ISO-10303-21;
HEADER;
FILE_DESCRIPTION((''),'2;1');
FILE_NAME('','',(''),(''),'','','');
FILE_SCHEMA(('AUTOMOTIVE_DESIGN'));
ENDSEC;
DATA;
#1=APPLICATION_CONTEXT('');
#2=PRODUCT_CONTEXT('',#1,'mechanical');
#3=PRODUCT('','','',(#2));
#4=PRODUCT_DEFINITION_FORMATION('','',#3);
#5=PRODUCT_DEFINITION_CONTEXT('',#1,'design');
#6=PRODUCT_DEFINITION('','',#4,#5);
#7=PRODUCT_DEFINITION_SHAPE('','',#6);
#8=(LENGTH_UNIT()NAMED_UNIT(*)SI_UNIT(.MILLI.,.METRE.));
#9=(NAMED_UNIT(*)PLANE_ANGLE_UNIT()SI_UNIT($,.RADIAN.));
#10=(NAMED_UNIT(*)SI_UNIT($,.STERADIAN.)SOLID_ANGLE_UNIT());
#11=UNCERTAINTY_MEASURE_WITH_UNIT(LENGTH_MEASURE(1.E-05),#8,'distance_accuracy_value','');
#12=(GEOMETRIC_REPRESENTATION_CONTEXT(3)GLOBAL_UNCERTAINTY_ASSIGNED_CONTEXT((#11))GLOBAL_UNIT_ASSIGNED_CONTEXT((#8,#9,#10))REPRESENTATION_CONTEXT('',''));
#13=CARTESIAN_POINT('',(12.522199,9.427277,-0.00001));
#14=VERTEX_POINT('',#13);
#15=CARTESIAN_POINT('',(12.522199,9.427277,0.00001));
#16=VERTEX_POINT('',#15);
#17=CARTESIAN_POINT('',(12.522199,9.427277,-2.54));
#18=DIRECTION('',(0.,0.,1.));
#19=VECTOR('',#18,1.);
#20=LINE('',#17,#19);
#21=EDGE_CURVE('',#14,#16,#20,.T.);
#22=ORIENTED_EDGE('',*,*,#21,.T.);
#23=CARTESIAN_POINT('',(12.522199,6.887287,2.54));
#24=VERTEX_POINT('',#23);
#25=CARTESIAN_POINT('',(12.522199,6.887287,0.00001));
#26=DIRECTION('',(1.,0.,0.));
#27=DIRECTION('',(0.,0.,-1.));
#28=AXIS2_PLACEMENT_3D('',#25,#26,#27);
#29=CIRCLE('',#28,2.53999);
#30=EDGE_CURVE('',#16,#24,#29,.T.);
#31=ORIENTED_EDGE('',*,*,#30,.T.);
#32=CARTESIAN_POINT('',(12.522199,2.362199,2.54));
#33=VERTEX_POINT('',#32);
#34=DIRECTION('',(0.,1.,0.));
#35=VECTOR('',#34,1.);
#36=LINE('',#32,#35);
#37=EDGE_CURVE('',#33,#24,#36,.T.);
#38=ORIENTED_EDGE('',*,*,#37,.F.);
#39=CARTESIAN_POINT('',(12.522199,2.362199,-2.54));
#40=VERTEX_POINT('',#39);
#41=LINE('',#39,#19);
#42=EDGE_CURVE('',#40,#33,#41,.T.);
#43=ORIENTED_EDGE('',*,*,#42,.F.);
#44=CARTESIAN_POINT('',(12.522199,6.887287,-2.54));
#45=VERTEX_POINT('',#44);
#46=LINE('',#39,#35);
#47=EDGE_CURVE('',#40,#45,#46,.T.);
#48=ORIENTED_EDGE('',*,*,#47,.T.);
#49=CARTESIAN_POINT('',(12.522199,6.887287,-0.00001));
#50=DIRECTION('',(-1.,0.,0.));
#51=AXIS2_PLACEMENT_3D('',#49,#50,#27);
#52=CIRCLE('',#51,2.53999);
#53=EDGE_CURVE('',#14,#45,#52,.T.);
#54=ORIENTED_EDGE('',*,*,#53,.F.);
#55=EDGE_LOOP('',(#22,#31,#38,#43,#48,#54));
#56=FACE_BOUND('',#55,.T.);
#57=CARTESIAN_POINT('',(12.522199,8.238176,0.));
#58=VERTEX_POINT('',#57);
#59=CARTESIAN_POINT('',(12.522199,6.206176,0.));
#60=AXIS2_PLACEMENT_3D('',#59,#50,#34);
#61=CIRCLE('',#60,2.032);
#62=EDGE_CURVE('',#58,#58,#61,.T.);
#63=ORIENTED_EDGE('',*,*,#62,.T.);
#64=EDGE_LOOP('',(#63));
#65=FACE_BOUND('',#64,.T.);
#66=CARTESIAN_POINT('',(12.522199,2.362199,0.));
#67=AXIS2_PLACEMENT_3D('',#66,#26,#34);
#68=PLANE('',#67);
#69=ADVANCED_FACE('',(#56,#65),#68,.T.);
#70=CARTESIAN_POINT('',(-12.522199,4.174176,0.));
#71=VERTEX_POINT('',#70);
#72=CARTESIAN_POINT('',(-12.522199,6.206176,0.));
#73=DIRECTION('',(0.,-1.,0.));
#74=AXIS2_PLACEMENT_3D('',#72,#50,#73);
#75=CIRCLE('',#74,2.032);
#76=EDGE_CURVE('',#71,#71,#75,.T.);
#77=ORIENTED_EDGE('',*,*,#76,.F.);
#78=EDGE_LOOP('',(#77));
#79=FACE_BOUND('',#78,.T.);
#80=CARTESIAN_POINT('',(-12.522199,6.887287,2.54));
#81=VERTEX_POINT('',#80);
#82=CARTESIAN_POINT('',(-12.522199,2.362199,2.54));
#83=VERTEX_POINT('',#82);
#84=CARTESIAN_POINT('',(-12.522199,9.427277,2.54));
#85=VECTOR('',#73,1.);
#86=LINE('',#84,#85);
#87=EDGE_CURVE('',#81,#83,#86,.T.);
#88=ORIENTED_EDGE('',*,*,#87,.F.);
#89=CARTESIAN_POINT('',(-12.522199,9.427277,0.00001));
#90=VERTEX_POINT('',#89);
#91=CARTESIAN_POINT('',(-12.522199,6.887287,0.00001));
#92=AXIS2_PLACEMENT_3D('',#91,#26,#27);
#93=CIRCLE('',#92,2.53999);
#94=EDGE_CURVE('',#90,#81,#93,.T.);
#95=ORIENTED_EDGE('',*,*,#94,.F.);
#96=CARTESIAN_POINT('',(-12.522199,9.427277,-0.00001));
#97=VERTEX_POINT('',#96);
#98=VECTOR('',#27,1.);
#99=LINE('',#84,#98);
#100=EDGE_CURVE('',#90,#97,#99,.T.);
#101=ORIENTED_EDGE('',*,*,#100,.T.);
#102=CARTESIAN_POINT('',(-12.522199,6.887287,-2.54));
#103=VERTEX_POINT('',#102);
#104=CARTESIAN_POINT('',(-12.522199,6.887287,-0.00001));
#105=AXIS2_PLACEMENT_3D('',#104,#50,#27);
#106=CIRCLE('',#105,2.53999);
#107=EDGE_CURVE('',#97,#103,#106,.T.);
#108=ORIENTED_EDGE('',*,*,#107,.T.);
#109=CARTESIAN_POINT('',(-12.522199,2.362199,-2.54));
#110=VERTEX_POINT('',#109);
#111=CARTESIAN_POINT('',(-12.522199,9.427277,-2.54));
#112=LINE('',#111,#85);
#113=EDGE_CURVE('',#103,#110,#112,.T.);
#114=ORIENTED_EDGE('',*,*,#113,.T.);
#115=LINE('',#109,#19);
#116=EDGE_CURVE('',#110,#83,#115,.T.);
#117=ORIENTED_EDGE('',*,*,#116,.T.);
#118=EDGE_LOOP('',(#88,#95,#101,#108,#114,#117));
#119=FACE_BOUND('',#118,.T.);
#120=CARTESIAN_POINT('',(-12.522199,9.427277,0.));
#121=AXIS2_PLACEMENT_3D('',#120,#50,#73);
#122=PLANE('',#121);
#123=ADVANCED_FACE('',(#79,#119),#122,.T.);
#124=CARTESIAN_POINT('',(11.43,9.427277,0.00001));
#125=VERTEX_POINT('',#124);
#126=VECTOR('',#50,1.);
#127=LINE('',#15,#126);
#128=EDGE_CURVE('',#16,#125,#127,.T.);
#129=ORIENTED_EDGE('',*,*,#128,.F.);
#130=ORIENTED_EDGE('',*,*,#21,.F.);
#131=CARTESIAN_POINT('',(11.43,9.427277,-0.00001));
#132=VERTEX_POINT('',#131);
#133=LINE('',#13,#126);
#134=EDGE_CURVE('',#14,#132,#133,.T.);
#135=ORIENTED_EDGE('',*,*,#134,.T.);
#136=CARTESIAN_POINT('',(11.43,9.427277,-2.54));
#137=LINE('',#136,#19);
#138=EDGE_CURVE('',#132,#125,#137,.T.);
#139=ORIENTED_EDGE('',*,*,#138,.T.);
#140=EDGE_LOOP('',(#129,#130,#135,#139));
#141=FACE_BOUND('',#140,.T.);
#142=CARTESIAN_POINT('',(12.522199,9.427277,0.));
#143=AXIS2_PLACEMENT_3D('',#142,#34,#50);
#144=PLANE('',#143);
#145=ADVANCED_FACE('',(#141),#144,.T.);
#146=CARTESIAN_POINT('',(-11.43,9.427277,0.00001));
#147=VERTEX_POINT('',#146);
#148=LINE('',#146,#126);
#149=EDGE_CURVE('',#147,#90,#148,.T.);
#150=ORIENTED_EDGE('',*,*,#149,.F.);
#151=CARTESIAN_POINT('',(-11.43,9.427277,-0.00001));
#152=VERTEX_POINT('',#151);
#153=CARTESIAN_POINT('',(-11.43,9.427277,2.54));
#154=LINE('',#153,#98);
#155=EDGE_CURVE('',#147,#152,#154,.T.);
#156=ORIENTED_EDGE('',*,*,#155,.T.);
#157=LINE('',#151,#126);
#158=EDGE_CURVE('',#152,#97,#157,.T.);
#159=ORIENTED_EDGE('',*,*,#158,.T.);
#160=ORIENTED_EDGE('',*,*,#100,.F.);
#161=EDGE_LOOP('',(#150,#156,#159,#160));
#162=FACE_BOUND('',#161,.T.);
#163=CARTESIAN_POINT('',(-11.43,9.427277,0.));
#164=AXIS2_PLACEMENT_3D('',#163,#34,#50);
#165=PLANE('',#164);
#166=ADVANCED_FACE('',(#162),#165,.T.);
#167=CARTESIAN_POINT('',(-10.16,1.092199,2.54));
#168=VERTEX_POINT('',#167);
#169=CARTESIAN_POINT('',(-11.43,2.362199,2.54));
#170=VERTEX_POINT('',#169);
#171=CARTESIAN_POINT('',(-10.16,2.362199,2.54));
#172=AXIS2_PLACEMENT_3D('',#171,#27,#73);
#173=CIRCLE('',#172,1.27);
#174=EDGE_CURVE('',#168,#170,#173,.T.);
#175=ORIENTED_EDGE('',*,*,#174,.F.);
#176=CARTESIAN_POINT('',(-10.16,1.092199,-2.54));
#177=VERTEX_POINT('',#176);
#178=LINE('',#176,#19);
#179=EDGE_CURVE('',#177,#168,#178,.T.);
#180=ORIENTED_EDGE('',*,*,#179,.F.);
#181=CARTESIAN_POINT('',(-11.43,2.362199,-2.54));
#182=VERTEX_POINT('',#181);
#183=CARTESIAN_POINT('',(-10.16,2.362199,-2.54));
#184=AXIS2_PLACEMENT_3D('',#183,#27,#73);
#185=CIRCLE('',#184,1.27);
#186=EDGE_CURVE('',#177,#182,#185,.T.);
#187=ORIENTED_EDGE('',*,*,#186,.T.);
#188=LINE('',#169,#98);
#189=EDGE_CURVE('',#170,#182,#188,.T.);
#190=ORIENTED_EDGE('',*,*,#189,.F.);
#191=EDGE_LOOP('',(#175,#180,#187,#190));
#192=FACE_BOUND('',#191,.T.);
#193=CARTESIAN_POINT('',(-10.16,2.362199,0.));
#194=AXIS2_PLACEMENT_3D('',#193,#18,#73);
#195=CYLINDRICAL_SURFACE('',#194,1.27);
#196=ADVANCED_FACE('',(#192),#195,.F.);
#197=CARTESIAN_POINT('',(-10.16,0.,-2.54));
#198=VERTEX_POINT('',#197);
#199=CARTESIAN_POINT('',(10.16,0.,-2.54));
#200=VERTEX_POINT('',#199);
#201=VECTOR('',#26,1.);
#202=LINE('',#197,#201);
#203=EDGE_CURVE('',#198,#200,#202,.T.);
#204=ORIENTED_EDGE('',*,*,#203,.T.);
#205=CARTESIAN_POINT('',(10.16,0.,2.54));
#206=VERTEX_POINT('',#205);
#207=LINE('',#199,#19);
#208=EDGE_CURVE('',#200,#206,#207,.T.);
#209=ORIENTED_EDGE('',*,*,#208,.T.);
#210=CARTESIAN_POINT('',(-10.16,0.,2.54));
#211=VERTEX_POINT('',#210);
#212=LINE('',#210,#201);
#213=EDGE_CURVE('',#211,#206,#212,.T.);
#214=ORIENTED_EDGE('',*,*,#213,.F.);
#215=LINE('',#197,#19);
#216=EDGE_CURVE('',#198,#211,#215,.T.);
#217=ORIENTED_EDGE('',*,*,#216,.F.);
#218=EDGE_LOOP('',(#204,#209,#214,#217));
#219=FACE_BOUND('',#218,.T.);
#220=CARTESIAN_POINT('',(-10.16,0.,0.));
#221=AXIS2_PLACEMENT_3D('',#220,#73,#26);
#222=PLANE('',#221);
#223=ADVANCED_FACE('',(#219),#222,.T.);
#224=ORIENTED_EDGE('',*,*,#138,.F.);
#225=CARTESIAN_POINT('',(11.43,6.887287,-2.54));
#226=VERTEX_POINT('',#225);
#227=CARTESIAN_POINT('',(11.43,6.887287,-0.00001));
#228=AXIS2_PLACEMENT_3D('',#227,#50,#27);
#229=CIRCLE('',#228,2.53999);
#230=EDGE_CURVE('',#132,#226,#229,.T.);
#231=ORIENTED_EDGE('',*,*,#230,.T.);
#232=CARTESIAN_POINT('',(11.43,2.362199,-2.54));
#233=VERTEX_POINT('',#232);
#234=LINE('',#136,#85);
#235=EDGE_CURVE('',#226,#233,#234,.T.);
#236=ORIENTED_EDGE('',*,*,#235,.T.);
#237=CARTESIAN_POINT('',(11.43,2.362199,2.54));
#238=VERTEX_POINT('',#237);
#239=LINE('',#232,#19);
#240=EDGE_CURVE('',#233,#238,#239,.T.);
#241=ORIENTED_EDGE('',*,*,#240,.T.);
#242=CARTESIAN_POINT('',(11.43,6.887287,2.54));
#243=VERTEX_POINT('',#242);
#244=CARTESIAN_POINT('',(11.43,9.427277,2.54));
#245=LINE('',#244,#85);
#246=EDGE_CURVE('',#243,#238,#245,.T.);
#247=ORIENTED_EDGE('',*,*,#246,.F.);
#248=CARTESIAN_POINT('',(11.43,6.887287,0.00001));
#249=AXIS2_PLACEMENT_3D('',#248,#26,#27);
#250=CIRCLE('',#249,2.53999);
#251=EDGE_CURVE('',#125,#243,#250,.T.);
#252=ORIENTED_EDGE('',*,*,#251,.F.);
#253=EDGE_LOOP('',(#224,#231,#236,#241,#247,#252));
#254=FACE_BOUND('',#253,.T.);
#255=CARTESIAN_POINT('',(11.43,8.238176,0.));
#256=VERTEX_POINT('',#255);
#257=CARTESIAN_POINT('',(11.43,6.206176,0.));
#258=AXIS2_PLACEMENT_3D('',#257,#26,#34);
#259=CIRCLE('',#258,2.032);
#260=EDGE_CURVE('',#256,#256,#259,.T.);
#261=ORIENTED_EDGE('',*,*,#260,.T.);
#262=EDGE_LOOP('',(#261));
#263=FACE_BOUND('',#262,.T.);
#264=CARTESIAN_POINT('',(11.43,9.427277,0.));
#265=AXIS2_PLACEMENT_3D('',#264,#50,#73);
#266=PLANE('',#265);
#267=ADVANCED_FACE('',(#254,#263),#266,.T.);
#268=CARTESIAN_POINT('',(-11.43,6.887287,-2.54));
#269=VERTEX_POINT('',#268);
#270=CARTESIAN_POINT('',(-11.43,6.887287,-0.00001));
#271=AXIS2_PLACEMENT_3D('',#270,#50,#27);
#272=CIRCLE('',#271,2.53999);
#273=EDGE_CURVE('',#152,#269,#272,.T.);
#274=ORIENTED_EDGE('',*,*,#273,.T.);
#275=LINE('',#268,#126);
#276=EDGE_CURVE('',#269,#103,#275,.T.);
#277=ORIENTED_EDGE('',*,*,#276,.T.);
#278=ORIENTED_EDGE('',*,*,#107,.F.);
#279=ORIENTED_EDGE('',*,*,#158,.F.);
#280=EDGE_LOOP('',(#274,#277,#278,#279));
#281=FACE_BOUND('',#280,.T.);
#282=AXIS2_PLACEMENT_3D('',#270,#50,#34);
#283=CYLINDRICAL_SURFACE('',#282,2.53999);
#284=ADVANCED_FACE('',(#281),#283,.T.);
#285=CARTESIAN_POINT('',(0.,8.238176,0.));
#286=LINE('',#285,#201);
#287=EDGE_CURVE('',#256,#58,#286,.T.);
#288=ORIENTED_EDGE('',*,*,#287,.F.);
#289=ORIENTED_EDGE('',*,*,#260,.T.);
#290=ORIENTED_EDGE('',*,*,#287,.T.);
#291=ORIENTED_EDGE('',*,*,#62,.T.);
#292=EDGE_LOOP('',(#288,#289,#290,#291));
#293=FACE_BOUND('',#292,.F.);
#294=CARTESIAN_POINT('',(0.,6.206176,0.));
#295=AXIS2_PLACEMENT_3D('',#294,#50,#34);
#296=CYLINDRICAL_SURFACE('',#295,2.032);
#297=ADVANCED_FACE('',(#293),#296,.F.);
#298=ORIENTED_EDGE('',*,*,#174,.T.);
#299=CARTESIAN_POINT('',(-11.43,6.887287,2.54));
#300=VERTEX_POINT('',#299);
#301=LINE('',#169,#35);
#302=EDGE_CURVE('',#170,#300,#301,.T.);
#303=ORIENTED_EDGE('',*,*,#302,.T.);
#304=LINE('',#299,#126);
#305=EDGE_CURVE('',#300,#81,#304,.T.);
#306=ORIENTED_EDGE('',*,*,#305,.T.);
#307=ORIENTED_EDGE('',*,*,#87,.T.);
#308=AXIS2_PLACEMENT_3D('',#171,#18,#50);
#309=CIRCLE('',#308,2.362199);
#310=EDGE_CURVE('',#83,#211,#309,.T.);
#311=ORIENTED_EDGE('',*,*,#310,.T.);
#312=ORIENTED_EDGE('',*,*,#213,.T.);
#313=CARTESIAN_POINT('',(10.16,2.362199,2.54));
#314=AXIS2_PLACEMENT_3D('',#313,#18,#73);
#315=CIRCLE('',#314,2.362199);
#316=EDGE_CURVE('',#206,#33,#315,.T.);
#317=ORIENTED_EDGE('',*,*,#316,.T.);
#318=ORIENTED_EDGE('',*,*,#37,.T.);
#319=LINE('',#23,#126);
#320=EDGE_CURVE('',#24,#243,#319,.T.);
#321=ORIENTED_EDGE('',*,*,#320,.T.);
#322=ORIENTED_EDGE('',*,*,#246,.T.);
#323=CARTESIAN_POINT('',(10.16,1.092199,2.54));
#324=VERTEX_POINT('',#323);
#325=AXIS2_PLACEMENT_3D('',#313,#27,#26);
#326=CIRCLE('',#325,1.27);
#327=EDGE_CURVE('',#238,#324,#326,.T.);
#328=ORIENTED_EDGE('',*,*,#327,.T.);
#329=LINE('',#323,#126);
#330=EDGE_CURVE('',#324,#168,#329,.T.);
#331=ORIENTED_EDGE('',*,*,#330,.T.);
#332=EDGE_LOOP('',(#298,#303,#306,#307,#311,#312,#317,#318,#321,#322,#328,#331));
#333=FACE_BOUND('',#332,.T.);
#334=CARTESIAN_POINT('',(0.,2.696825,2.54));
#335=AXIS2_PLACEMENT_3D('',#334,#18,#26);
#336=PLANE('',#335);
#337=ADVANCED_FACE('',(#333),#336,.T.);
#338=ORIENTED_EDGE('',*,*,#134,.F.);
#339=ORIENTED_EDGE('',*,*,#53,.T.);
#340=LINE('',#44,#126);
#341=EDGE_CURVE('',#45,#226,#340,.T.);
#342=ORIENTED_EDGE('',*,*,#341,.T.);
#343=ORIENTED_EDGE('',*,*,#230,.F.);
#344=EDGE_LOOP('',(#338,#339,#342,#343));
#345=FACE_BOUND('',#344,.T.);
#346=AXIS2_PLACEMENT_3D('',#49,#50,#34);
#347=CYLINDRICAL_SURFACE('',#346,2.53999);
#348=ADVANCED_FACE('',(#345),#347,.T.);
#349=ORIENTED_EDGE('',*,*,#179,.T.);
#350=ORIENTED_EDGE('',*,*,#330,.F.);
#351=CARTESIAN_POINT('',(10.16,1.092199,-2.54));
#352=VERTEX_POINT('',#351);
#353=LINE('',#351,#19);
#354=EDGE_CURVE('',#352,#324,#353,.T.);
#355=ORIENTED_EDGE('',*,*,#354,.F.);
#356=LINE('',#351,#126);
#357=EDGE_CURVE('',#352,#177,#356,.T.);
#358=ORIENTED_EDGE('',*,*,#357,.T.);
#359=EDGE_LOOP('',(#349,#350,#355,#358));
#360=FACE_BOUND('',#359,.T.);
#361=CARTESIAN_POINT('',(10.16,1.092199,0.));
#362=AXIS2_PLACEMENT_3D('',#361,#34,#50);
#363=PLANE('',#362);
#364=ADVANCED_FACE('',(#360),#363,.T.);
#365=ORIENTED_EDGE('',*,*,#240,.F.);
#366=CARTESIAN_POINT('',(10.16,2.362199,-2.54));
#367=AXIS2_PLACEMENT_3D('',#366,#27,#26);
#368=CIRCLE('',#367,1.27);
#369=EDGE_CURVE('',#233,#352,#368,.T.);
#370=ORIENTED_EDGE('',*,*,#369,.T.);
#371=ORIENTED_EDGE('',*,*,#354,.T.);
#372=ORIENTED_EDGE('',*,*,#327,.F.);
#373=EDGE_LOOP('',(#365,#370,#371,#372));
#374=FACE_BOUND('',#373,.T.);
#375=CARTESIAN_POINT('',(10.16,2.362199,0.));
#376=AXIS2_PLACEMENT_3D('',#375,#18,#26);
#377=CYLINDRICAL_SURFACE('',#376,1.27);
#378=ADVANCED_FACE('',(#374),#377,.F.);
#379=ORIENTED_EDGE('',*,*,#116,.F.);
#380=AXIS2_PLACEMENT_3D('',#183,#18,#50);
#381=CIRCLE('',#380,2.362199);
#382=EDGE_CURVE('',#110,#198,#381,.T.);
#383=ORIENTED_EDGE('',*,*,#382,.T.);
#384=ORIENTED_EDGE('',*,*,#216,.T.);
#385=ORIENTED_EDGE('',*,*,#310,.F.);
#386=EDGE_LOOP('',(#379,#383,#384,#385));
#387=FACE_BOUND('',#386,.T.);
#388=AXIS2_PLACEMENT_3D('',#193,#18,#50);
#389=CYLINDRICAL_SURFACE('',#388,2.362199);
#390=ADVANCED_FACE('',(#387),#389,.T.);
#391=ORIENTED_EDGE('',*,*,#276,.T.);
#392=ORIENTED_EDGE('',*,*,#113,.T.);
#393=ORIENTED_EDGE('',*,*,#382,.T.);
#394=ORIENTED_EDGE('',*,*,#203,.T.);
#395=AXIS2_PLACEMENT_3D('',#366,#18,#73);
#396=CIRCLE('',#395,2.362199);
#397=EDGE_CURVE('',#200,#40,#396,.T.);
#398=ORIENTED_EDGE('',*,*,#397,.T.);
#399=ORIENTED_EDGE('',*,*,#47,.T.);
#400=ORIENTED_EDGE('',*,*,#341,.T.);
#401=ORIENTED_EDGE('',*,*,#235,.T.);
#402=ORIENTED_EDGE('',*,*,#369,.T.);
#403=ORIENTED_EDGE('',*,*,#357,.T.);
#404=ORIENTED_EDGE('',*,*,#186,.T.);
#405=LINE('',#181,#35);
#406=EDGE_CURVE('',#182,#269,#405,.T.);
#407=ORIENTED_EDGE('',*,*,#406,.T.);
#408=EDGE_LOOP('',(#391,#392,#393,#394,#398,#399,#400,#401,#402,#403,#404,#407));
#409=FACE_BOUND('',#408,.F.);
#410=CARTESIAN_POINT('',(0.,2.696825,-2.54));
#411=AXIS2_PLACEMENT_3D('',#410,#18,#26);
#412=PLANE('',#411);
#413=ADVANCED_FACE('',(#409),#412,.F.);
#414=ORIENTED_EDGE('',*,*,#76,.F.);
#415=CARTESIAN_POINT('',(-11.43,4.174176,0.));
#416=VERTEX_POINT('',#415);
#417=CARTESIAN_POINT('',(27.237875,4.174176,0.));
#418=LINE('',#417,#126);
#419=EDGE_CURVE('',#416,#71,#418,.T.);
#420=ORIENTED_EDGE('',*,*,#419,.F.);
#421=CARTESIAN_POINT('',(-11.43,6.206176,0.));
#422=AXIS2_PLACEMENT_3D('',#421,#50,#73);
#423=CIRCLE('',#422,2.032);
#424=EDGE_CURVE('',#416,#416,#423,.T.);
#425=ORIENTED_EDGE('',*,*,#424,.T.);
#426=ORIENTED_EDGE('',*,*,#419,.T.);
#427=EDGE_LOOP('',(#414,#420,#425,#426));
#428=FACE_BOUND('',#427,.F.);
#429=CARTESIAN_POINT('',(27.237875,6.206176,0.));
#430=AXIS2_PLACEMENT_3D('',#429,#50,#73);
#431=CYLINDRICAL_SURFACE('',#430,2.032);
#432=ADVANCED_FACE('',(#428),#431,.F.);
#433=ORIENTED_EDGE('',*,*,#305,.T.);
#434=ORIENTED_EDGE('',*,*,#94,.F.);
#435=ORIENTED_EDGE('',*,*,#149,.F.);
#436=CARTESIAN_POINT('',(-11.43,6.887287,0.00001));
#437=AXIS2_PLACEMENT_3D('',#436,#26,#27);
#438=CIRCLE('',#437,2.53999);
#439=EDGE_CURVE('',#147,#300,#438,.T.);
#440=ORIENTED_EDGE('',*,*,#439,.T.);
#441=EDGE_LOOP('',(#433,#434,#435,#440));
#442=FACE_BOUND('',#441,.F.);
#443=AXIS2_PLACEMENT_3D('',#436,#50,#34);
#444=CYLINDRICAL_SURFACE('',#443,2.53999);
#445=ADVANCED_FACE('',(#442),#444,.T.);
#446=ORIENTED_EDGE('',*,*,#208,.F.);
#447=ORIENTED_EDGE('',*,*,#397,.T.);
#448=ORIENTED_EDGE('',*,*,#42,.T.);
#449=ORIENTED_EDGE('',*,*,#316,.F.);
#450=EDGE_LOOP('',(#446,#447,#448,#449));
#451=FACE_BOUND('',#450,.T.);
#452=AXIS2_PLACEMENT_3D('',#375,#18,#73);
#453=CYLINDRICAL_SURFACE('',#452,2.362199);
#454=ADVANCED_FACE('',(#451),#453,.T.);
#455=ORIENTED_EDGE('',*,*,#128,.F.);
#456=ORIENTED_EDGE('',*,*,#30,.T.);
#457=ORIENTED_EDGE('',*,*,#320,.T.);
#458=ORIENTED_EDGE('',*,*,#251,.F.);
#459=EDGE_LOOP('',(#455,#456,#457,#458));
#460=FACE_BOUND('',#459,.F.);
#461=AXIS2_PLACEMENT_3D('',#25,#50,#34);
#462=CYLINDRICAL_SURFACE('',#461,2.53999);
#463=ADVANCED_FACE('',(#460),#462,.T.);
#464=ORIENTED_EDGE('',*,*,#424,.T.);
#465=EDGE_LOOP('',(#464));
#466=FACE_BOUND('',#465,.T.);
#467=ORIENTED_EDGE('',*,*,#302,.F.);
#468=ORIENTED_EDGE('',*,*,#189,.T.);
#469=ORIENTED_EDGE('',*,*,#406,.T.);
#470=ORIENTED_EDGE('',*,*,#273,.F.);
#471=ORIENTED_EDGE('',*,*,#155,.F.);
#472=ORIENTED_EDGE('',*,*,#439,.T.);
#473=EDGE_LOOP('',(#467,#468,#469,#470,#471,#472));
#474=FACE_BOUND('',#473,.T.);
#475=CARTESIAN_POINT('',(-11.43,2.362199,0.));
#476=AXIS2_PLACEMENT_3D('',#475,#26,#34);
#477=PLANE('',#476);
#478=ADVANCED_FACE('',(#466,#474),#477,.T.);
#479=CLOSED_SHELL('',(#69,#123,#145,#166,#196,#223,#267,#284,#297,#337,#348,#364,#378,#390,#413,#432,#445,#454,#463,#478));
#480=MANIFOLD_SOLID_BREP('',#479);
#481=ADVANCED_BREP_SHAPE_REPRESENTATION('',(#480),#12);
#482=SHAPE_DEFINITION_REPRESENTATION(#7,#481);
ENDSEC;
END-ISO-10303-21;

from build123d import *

# Parameters (mm, degrees)
F1_DEPTH = 2.54
F2_R     = 2.53999
F4_D     = 4.064
F4_DEPTH = 12.5231992362
F5_D     = 4.064


# Not quite as in the source:
# - a fillet or chamfer is up to 0.001 mm smaller than in the source, because OpenCascade refuses the exact size


with BuildPart() as f1:
    # F0 (on Top) → F1 (new body, symmetric)
    with BuildSketch(Plane.XY):
        with BuildLine():
            Line((-12.5221992362, 9.4272772469), (-12.5221992362, 8.3157558613))
            Line((-12.5221992362, 8.3157558613), (-12.5221992362, 2.3621992362))
            ThreePointArc((-12.5221992362, 2.3621992362), (-11.8303270984, 0.6918721378), (-10.16, 0))
            Line((-10.16, 0), (0, 0))
            Line((0, 0), (10.16, 0))
            ThreePointArc((10.16, 0), (11.8303270984, 0.6918721378), (12.5221992362, 2.3621992362))
            Line((12.5221992362, 2.3621992362), (12.5221992362, 8.3157558613))
            Line((12.5221992362, 8.3157558613), (12.5221992362, 9.4272772469))
            Line((12.5221992362, 9.4272772469), (11.43, 9.4272772469))
            Line((11.43, 9.4272772469), (11.43, 8.3157558613))
            Line((11.43, 8.3157558613), (11.43, 2.3621992362))
            ThreePointArc((11.43, 2.3621992362), (11.0580256121, 1.464173624), (10.16, 1.0921992362))
            Line((10.16, 1.0921992362), (1.2192031136, 1.0921992362))
            Line((1.2192031136, 1.0921992362), (0, 1.0921992362))
            Line((0, 1.0921992362), (-10.16, 1.0921992362))
            ThreePointArc((-10.16, 1.0921992362), (-11.0580256121, 1.464173624), (-11.43, 2.3621992362))
            Line((-11.43, 2.3621992362), (-11.43, 8.3157558613))
            Line((-11.43, 8.3157558613), (-11.43, 9.4272772469))
            Line((-11.43, 9.4272772469), (-12.5221992362, 9.4272772469))
        make_face()
    extrude(amount=F1_DEPTH, both=True)

    # F2 (radius 2.54 in the source; OpenCascade refuses exactly that, so slightly less here)
    f2_edges = [f1.edges().sort_by_distance(p)[0] for p in [
        (-11.9761, 9.427277, 2.54),
        (-11.9761, 9.427277, -2.54),
        (11.9761, 9.427277, 2.54),
        (11.9761, 9.427277, -2.54),
    ]]
    fillet(f2_edges, radius=F2_R)

    # F4 (through all, one way)
    with BuildSketch(Plane(origin=(0, 0, 0), x_dir=(0, 1, 0), z_dir=(-1, 0, 0))):
        with Locations((6.2061757781, 0)):
            Circle(F4_D / 2)
    extrude(amount=-F4_DEPTH, mode=Mode.SUBTRACT)

    # F5 (through all)
    with Locations(Plane.YZ):
        with Locations((6.2061757781, 0)):
            Hole(F5_D / 2)


solid = f1.part
